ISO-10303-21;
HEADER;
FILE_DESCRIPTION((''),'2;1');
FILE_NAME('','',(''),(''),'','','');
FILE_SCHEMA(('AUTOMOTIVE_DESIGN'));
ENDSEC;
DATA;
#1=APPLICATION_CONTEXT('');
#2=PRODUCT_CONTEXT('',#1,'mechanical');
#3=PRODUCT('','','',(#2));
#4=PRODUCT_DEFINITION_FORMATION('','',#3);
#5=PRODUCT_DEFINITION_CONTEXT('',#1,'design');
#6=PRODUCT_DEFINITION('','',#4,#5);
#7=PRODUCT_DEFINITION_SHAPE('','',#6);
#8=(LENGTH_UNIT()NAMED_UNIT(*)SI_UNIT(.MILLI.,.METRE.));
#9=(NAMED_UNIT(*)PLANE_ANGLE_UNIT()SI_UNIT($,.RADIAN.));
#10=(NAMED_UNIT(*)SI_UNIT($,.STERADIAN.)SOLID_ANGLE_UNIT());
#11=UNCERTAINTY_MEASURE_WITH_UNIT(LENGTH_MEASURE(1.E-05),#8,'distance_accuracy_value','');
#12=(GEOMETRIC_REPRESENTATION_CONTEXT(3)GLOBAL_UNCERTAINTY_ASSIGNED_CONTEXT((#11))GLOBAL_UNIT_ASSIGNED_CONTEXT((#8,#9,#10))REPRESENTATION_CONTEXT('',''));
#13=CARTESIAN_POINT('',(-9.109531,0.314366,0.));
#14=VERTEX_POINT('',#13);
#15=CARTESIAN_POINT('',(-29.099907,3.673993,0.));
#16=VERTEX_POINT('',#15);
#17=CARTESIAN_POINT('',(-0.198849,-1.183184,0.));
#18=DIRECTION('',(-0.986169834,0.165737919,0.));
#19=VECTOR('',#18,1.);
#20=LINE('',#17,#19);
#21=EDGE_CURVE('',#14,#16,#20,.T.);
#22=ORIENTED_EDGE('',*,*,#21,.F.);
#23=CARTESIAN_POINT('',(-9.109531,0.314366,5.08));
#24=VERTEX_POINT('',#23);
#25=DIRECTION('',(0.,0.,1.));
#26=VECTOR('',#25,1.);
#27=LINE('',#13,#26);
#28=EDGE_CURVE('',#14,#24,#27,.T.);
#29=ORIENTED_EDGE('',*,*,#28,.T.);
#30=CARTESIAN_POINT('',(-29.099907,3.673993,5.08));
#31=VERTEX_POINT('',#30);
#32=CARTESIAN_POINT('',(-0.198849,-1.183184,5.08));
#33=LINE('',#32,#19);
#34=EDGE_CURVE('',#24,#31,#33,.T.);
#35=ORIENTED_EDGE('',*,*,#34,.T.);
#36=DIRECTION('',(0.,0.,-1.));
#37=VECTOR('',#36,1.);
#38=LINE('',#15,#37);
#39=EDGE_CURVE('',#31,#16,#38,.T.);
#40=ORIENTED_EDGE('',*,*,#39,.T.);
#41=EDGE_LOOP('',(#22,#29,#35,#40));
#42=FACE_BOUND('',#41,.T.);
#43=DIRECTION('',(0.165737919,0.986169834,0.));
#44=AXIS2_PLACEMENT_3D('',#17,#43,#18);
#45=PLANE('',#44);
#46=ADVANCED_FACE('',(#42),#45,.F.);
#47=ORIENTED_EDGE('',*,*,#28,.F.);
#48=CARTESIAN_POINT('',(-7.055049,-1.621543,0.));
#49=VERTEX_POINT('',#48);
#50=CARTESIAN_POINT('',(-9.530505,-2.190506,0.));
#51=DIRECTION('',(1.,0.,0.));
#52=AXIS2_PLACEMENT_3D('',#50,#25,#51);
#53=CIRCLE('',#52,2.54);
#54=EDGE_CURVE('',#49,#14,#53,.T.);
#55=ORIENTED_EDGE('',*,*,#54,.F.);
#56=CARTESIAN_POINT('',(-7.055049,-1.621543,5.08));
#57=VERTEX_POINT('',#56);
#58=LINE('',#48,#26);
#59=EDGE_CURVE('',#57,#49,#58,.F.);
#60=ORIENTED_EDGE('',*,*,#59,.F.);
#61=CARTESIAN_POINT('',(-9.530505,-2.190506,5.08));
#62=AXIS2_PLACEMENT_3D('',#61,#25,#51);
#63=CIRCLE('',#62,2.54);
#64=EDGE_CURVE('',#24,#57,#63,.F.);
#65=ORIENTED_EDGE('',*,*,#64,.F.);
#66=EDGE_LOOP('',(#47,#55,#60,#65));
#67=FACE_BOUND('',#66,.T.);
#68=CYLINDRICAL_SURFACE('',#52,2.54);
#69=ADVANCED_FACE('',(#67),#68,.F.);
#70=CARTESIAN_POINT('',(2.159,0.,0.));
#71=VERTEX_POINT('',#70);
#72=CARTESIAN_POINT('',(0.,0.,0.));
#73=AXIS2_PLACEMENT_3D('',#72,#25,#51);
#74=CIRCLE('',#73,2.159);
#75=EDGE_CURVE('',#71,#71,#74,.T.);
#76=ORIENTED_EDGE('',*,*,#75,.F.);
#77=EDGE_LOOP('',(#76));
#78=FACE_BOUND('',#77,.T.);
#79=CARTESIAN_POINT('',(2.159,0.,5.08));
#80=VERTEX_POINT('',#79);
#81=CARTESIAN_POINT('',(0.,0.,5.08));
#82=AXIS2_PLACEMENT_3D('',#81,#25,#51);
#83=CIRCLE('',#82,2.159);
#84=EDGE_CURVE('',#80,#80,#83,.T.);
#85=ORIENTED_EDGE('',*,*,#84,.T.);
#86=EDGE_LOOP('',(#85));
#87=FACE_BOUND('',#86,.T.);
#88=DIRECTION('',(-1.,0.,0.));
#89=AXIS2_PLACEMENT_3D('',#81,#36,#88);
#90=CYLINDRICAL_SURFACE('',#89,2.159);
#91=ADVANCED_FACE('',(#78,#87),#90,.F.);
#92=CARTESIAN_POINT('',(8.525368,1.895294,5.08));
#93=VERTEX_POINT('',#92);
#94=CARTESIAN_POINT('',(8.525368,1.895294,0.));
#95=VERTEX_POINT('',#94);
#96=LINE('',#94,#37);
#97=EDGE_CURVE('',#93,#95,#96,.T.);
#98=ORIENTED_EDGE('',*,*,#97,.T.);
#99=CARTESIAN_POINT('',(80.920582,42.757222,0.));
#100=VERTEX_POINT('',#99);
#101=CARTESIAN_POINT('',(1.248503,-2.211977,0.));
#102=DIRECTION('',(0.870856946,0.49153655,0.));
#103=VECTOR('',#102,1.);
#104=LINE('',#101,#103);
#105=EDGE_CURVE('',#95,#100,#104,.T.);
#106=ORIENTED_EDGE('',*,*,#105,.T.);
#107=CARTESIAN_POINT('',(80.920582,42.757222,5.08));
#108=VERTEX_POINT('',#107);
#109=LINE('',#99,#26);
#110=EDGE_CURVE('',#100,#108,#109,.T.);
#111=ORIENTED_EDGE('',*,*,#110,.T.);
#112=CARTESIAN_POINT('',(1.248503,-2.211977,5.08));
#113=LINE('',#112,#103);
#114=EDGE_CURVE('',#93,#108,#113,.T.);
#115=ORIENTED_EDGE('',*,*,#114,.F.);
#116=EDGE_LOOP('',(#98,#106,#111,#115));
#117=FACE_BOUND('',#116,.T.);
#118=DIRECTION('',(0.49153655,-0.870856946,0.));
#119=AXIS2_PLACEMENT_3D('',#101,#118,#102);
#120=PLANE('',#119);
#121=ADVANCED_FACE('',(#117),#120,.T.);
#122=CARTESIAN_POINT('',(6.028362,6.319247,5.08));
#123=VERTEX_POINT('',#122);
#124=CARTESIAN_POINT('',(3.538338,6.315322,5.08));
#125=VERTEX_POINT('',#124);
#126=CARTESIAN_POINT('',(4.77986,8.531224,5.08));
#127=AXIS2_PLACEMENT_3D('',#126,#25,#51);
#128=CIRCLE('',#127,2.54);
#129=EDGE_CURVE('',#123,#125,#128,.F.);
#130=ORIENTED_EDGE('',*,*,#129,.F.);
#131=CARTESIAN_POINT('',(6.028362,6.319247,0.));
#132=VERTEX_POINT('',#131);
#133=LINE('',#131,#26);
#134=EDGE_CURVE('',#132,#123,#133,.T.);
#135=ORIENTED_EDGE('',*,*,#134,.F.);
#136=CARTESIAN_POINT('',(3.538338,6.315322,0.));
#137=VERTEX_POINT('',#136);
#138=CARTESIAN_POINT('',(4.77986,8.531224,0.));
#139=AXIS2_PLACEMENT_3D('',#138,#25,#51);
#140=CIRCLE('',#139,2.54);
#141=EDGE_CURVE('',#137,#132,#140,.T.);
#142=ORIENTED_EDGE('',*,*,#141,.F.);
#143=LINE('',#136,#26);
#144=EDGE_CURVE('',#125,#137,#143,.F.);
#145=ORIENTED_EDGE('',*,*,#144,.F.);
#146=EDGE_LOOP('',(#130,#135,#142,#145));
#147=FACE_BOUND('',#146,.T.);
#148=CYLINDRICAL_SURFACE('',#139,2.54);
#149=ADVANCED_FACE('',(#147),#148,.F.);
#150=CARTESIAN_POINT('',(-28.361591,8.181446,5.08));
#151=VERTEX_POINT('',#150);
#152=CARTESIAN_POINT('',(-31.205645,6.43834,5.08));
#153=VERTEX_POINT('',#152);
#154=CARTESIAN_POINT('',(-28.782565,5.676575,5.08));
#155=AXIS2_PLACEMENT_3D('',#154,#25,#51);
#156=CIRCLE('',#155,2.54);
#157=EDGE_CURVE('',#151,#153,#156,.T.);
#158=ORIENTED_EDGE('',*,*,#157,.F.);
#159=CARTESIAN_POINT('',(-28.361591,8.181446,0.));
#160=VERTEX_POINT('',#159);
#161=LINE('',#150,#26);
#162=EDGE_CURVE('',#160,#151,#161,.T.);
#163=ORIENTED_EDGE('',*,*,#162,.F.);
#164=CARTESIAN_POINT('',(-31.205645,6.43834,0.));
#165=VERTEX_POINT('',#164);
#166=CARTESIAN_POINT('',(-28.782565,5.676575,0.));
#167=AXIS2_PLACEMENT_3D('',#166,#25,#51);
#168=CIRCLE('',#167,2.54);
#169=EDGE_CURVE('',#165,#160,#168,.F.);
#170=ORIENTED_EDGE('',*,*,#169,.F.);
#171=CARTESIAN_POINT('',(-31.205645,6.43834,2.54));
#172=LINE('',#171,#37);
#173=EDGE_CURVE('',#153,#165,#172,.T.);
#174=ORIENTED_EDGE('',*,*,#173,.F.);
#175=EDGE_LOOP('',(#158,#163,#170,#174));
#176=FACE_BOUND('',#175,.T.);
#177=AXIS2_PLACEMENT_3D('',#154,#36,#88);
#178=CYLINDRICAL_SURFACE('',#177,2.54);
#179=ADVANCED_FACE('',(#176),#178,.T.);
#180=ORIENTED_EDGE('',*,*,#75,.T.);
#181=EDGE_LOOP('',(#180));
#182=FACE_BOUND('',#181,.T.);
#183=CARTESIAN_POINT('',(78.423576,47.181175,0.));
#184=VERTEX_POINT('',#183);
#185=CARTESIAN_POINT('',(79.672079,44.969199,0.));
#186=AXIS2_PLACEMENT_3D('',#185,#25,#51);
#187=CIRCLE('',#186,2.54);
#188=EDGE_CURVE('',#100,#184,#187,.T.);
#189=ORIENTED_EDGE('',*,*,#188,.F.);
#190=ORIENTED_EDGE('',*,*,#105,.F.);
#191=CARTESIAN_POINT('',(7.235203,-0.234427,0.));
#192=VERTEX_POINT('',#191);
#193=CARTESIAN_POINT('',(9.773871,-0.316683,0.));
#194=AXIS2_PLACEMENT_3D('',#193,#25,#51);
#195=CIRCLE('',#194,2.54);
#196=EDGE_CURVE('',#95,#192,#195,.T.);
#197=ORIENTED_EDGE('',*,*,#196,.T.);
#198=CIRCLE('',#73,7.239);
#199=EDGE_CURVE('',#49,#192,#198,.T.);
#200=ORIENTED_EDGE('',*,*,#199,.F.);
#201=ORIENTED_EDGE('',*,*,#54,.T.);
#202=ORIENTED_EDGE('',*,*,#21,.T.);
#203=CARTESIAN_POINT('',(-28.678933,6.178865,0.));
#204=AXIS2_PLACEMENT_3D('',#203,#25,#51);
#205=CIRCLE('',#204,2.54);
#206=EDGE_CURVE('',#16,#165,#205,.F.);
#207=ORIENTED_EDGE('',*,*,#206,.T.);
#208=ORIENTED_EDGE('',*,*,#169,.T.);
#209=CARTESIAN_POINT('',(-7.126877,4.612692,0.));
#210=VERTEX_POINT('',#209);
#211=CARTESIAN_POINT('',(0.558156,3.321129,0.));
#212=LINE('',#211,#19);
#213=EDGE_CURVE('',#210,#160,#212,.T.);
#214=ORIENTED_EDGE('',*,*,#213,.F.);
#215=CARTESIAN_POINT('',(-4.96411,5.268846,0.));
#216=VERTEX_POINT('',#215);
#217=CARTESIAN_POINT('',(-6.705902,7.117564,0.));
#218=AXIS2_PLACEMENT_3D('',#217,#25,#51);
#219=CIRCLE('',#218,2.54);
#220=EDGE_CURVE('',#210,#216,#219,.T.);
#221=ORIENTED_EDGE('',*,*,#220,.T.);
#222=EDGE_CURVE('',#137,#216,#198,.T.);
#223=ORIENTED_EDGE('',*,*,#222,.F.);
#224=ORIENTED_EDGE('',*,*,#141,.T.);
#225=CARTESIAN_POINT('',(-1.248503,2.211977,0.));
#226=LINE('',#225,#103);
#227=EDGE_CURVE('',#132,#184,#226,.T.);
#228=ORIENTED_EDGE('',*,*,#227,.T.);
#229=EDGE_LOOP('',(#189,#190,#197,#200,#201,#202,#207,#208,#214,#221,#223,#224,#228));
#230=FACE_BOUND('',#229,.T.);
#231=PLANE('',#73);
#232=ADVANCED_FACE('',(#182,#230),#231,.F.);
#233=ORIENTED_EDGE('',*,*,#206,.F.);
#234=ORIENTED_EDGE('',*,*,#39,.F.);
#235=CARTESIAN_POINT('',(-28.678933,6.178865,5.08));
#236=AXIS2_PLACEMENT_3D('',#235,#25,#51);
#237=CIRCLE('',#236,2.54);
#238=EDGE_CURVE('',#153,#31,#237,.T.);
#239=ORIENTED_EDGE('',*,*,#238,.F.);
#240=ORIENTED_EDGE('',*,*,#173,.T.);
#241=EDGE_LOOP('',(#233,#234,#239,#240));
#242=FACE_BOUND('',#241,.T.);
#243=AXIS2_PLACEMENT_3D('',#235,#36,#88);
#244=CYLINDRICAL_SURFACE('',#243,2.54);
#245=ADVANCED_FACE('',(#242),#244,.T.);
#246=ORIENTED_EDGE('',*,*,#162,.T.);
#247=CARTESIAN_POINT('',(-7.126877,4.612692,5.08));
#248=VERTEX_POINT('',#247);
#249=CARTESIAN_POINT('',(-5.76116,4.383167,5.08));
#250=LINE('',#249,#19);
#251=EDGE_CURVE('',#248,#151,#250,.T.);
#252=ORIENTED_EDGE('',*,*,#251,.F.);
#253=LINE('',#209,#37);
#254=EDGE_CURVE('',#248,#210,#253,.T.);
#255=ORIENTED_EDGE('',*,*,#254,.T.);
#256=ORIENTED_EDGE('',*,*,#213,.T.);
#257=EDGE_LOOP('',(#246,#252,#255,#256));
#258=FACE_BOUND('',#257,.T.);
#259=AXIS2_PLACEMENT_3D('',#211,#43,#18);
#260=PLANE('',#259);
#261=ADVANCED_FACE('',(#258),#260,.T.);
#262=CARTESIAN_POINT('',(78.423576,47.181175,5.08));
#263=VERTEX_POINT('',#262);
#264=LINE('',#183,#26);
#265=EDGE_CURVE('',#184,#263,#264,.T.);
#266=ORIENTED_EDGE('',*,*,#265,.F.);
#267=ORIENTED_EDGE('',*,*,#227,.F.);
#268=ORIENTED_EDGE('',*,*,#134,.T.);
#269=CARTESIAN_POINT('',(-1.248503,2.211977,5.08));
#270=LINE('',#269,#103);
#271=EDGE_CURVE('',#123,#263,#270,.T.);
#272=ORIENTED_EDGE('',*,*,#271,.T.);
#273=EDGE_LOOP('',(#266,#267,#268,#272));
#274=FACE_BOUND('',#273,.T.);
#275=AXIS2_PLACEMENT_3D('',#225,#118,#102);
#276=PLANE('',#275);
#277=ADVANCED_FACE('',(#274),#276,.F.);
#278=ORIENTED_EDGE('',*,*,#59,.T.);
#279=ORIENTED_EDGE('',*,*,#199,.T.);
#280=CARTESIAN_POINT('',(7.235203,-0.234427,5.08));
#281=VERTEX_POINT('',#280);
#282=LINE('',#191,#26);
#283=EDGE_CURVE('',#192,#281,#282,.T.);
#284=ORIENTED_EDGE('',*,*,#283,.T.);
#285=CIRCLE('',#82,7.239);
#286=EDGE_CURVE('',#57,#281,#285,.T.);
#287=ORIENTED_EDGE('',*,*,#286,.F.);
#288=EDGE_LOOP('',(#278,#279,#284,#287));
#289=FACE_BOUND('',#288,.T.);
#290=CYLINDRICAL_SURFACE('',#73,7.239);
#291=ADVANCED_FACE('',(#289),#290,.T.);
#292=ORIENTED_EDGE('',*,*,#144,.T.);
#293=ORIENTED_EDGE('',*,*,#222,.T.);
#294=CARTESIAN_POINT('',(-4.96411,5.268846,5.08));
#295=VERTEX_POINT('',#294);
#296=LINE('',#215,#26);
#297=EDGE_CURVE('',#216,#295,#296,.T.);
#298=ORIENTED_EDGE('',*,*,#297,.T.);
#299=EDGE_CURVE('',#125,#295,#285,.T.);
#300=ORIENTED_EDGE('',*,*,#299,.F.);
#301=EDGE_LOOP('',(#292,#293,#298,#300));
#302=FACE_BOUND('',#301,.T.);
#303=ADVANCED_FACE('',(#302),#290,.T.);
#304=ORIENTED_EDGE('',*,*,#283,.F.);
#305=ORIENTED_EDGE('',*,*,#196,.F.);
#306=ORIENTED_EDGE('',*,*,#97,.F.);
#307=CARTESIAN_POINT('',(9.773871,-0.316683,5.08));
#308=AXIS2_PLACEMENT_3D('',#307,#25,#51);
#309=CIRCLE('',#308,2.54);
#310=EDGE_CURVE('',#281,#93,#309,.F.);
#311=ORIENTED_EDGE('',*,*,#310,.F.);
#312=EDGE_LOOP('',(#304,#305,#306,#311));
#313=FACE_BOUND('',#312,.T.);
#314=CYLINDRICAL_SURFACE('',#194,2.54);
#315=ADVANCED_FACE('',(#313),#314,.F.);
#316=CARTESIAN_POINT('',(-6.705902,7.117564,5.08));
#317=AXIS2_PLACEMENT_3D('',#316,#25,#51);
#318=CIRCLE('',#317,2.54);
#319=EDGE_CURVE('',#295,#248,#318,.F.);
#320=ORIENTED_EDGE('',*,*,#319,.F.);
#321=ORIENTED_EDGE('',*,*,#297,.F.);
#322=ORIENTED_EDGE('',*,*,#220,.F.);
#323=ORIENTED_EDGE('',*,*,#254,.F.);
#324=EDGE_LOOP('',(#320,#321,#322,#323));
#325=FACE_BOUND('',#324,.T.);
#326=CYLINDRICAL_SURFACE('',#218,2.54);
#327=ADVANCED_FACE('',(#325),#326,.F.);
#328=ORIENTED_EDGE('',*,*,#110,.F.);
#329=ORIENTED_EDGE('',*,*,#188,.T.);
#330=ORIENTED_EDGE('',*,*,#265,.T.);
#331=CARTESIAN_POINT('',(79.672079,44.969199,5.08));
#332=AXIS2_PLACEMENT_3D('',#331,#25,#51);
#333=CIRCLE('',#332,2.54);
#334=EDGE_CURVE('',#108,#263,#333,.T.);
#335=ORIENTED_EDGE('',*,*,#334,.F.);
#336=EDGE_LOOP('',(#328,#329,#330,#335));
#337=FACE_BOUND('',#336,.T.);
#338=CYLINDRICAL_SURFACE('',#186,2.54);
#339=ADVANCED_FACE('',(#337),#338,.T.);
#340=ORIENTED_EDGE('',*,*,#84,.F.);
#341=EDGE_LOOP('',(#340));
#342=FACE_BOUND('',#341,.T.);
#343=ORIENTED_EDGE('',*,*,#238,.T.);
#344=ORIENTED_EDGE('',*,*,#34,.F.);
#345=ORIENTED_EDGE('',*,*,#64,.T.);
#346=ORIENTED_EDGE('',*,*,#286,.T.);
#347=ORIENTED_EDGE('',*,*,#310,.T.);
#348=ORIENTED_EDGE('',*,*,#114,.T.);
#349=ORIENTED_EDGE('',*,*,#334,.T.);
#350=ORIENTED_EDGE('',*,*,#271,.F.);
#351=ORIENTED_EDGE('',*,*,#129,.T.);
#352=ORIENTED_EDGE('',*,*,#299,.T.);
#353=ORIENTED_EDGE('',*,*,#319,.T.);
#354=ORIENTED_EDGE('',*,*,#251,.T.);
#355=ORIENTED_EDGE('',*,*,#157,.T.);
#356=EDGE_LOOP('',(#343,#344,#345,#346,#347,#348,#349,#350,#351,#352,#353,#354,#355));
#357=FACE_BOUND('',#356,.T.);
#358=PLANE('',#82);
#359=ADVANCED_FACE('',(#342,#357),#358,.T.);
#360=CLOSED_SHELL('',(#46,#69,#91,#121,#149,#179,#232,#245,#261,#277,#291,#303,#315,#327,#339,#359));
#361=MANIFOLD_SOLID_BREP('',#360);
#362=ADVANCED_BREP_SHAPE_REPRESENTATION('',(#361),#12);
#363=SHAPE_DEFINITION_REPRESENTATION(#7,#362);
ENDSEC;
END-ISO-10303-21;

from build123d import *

# Parameters (mm, degrees)
SKETCH1_R               = 31.877
SKETCH1_R_2             = 2.159
BOSS_EXTRUDE1_DEPTH     = 5.08
BOSS_EXTRUDE4_START     = -5.08
BOSS_EXTRUDE4_DEPTH     = 5.08
CUT_EXTRUDE1_DEPTH      = 96.088150113
CUT_EXTRUDE1_DEPTH_BACK = 96.088150113
FILLET1_R               = 2.54


with BuildPart() as part:
    # Sketch1 → Boss-Extrude1 (new body)
    with BuildSketch(Plane.XY):
        Circle(SKETCH1_R)
        Circle(SKETCH1_R_2, mode=Mode.SUBTRACT)
        with BuildLine():
            ThreePointArc((19.487155783, 19.487155783), (-5.258505104, 27.052663549), (-25.368193256, 10.76815917))
            ThreePointArc((-25.368193256, 10.76815917), (-24.224411784, 7.937200685), (-21.393453299, 9.080982157))
            ThreePointArc((-21.393453299, 9.080982157), (-4.434591862, 22.813997371), (16.433868702, 16.433868702))
            ThreePointArc((16.433868702, 16.433868702), (19.487155783, 16.433868702), (19.487155783, 19.487155783))
        make_face(mode=Mode.SUBTRACT)
    extrude(amount=BOSS_EXTRUDE1_DEPTH)

    # Sketch2 → Boss-Extrude4 (add)
    with BuildSketch(Plane.XY.offset(5.08).offset(BOSS_EXTRUDE4_START)):
        with BuildLine():
            ThreePointArc((26.423537131, 17.830866902), (27.113483126, 16.763119094), (27.760306855, 15.668710614))
            ThreePointArc((27.760306855, 15.668710614), (28.362979586, 14.549382048), (28.920542807, 13.406913618))
            Line((28.920542807, 13.406913618), (80.920581905, 42.757221913))
            ThreePointArc((80.920581905, 42.757221913), (81.884055709, 46.217701392), (78.423576229, 47.181175196))
            Line((78.423576229, 47.181175196), (26.423537131, 17.830866902))
        make_face()
    extrude(amount=BOSS_EXTRUDE4_DEPTH)

    # Sketch6 → Cut-Extrude1 (cut, two sides: drawn at the far end of the back side and taken through both)
    # profile 1 of 2: a face of its own
    with BuildSketch(Plane.XY.offset(5.08).offset(-CUT_EXTRUDE1_DEPTH_BACK)):
        with BuildLine():
            ThreePointArc((7.239, 0), (0, -7.239), (-7.239, 0))
            Line((-7.239, 0), (-31.612710273, 4.096300546))
            ThreePointArc((-31.612710273, 4.096300546), (4.846010768, -31.506496293), (28.920542807, 13.406913618))
            Line((28.920542807, 13.406913618), (7.151828818, 1.120029266))
            ThreePointArc((7.151828818, 1.120029266), (7.217174302, 0.561708192), (7.239, 0))
        make_face()
    # profile 2 of 2: a face of its own
    with BuildSketch(Plane.XY.offset(5.08).offset(-CUT_EXTRUDE1_DEPTH_BACK)):
        with BuildLine():
            Line((-30.702053839, 8.574789739), (-5.761160237, 4.383167088))
            ThreePointArc((-5.761160237, 4.383167088), (-0.801790855, 7.194459842), (4.654823143, 5.54398255))
            Line((4.654823143, 5.54398255), (26.423537131, 17.830866902))
            ThreePointArc((26.423537131, 17.830866902), (-5.098545618, 31.466616621), (-30.702053839, 8.574789739))
        make_face()
        with BuildLine():
            ThreePointArc((-21.393453299, 9.080982157), (-24.224411784, 7.937200685), (-25.368193256, 10.76815917))
            ThreePointArc((-25.368193256, 10.76815917), (-5.258505104, 27.052663549), (19.487155783, 19.487155783))
            ThreePointArc((19.487155783, 19.487155783), (19.487155783, 16.433868702), (16.433868702, 16.433868702))
            ThreePointArc((16.433868702, 16.433868702), (-4.434591862, 22.813997371), (-21.393453299, 9.080982157))
        make_face(mode=Mode.SUBTRACT)
    extrude(amount=CUT_EXTRUDE1_DEPTH + CUT_EXTRUDE1_DEPTH_BACK, mode=Mode.SUBTRACT)

    # Fillet1
    # the kernel refuses this fillet: 2.54 mm, written as the material it adds along each edge
    with BuildSketch(Plane(origin=(7.151828818, 1.120029266, 0), x_dir=(0.8708569456123161, 0.49153655029792803, 0), z_dir=(0, 0, 1))) as fillet1_piece_1:
        with BuildLine():
            CenterArc((1.577227226, -2.54), FILLET1_R, 90, 58.70258778)
            ThreePointArc((-0.593157799, -1.220519481), (-0.267916042, -0.624189545), (0, 0))
            Line((0, 0), (1.577227226, 0))
        make_face()
    extrude(amount=5.08)
    with BuildSketch(Plane(origin=(-7.239, 0, 5.08), x_dir=(0.11271886677940961, -0.9936269204646005, 0), z_dir=(0, 0, -1))) as fillet1_piece_2:
        with BuildLine():
            CenterArc((1.918249675, 2.523812378), FILLET1_R, 196.012174579, 67.515755227)
            Line((-0.523206212, 1.823174702), (0, 0))
            ThreePointArc((0, 0), (0.815971877, 0.046134723), (1.631943753, 0))
        make_face()
    extrude(amount=5.08)
    with BuildSketch(Plane(origin=(-5.761160237, 4.383167088, 0), x_dir=(-0.9861698342812768, 0.1657379194802423, 0), z_dir=(0, 0, 1))) as fillet1_piece_3:
        with BuildLine():
            CenterArc((1.384869379, -2.54), FILLET1_R, 90, 52.834345642)
            ThreePointArc((-0.639236805, -1.005531312), (-0.298894804, -0.515940071), (0, 0))
            Line((0, 0), (1.384869379, 0))
        make_face()
    extrude(amount=5.08)
    with BuildSketch(Plane(origin=(4.654823143, 5.54398255, 0), x_dir=(-0.822747868924725, 0.5684064955468259, 0), z_dir=(0, 0, 1))) as fillet1_piece_4:
        with BuildLine():
            CenterArc((1.595093986, -2.528818084), FILLET1_R, 95.378217341, 58.70258778)
            Line((-0.689410954, -1.418576138), (0, 0))
            ThreePointArc((0, 0), (0.678510128, -0.031868462), (1.357020257, 0))
        make_face()
    extrude(amount=5.08)
    # the kernel refuses this fillet: 2.54 mm, written as the material it takes off along each edge
    with BuildSketch(Plane(origin=(-31.612710273, 4.096300546, 11.72014543), x_dir=(0.16970739547813604, 0.9854944951241623, 0), z_dir=(0, 0, -1))) as fillet1_2_piece_1:
        with BuildLine():
            CenterArc((2.550239121, 2.537794777), FILLET1_R, 179.769297531, 92.618395473)
            Line((0.010259711, 2.548022104), (0, 0))
            ThreePointArc((0, 0), (1.328029086, -0.027675553), (2.656058172, 0))
        make_face()
    extrude(amount=18.360290859, mode=Mode.SUBTRACT)
    with BuildSketch(Plane(origin=(-30.702053839, 8.574789739, 11.264732426), x_dir=(-0.23142006646754307, -0.9728539216327177, 0), z_dir=(0, 0, -1))) as fillet1_2_piece_2:
        with BuildLine():
            CenterArc((2.375331497, -2.538087003), FILLET1_R, 87.776151747, 88.383261221)
            Line((-0.158964351, -2.367956016), (0, 0))
            ThreePointArc((0, 0), (1.236946485, 0.024008109), (2.47389297, 0))
        make_face()
    extrude(amount=17.449464851, mode=Mode.SUBTRACT)


solid = part.part
